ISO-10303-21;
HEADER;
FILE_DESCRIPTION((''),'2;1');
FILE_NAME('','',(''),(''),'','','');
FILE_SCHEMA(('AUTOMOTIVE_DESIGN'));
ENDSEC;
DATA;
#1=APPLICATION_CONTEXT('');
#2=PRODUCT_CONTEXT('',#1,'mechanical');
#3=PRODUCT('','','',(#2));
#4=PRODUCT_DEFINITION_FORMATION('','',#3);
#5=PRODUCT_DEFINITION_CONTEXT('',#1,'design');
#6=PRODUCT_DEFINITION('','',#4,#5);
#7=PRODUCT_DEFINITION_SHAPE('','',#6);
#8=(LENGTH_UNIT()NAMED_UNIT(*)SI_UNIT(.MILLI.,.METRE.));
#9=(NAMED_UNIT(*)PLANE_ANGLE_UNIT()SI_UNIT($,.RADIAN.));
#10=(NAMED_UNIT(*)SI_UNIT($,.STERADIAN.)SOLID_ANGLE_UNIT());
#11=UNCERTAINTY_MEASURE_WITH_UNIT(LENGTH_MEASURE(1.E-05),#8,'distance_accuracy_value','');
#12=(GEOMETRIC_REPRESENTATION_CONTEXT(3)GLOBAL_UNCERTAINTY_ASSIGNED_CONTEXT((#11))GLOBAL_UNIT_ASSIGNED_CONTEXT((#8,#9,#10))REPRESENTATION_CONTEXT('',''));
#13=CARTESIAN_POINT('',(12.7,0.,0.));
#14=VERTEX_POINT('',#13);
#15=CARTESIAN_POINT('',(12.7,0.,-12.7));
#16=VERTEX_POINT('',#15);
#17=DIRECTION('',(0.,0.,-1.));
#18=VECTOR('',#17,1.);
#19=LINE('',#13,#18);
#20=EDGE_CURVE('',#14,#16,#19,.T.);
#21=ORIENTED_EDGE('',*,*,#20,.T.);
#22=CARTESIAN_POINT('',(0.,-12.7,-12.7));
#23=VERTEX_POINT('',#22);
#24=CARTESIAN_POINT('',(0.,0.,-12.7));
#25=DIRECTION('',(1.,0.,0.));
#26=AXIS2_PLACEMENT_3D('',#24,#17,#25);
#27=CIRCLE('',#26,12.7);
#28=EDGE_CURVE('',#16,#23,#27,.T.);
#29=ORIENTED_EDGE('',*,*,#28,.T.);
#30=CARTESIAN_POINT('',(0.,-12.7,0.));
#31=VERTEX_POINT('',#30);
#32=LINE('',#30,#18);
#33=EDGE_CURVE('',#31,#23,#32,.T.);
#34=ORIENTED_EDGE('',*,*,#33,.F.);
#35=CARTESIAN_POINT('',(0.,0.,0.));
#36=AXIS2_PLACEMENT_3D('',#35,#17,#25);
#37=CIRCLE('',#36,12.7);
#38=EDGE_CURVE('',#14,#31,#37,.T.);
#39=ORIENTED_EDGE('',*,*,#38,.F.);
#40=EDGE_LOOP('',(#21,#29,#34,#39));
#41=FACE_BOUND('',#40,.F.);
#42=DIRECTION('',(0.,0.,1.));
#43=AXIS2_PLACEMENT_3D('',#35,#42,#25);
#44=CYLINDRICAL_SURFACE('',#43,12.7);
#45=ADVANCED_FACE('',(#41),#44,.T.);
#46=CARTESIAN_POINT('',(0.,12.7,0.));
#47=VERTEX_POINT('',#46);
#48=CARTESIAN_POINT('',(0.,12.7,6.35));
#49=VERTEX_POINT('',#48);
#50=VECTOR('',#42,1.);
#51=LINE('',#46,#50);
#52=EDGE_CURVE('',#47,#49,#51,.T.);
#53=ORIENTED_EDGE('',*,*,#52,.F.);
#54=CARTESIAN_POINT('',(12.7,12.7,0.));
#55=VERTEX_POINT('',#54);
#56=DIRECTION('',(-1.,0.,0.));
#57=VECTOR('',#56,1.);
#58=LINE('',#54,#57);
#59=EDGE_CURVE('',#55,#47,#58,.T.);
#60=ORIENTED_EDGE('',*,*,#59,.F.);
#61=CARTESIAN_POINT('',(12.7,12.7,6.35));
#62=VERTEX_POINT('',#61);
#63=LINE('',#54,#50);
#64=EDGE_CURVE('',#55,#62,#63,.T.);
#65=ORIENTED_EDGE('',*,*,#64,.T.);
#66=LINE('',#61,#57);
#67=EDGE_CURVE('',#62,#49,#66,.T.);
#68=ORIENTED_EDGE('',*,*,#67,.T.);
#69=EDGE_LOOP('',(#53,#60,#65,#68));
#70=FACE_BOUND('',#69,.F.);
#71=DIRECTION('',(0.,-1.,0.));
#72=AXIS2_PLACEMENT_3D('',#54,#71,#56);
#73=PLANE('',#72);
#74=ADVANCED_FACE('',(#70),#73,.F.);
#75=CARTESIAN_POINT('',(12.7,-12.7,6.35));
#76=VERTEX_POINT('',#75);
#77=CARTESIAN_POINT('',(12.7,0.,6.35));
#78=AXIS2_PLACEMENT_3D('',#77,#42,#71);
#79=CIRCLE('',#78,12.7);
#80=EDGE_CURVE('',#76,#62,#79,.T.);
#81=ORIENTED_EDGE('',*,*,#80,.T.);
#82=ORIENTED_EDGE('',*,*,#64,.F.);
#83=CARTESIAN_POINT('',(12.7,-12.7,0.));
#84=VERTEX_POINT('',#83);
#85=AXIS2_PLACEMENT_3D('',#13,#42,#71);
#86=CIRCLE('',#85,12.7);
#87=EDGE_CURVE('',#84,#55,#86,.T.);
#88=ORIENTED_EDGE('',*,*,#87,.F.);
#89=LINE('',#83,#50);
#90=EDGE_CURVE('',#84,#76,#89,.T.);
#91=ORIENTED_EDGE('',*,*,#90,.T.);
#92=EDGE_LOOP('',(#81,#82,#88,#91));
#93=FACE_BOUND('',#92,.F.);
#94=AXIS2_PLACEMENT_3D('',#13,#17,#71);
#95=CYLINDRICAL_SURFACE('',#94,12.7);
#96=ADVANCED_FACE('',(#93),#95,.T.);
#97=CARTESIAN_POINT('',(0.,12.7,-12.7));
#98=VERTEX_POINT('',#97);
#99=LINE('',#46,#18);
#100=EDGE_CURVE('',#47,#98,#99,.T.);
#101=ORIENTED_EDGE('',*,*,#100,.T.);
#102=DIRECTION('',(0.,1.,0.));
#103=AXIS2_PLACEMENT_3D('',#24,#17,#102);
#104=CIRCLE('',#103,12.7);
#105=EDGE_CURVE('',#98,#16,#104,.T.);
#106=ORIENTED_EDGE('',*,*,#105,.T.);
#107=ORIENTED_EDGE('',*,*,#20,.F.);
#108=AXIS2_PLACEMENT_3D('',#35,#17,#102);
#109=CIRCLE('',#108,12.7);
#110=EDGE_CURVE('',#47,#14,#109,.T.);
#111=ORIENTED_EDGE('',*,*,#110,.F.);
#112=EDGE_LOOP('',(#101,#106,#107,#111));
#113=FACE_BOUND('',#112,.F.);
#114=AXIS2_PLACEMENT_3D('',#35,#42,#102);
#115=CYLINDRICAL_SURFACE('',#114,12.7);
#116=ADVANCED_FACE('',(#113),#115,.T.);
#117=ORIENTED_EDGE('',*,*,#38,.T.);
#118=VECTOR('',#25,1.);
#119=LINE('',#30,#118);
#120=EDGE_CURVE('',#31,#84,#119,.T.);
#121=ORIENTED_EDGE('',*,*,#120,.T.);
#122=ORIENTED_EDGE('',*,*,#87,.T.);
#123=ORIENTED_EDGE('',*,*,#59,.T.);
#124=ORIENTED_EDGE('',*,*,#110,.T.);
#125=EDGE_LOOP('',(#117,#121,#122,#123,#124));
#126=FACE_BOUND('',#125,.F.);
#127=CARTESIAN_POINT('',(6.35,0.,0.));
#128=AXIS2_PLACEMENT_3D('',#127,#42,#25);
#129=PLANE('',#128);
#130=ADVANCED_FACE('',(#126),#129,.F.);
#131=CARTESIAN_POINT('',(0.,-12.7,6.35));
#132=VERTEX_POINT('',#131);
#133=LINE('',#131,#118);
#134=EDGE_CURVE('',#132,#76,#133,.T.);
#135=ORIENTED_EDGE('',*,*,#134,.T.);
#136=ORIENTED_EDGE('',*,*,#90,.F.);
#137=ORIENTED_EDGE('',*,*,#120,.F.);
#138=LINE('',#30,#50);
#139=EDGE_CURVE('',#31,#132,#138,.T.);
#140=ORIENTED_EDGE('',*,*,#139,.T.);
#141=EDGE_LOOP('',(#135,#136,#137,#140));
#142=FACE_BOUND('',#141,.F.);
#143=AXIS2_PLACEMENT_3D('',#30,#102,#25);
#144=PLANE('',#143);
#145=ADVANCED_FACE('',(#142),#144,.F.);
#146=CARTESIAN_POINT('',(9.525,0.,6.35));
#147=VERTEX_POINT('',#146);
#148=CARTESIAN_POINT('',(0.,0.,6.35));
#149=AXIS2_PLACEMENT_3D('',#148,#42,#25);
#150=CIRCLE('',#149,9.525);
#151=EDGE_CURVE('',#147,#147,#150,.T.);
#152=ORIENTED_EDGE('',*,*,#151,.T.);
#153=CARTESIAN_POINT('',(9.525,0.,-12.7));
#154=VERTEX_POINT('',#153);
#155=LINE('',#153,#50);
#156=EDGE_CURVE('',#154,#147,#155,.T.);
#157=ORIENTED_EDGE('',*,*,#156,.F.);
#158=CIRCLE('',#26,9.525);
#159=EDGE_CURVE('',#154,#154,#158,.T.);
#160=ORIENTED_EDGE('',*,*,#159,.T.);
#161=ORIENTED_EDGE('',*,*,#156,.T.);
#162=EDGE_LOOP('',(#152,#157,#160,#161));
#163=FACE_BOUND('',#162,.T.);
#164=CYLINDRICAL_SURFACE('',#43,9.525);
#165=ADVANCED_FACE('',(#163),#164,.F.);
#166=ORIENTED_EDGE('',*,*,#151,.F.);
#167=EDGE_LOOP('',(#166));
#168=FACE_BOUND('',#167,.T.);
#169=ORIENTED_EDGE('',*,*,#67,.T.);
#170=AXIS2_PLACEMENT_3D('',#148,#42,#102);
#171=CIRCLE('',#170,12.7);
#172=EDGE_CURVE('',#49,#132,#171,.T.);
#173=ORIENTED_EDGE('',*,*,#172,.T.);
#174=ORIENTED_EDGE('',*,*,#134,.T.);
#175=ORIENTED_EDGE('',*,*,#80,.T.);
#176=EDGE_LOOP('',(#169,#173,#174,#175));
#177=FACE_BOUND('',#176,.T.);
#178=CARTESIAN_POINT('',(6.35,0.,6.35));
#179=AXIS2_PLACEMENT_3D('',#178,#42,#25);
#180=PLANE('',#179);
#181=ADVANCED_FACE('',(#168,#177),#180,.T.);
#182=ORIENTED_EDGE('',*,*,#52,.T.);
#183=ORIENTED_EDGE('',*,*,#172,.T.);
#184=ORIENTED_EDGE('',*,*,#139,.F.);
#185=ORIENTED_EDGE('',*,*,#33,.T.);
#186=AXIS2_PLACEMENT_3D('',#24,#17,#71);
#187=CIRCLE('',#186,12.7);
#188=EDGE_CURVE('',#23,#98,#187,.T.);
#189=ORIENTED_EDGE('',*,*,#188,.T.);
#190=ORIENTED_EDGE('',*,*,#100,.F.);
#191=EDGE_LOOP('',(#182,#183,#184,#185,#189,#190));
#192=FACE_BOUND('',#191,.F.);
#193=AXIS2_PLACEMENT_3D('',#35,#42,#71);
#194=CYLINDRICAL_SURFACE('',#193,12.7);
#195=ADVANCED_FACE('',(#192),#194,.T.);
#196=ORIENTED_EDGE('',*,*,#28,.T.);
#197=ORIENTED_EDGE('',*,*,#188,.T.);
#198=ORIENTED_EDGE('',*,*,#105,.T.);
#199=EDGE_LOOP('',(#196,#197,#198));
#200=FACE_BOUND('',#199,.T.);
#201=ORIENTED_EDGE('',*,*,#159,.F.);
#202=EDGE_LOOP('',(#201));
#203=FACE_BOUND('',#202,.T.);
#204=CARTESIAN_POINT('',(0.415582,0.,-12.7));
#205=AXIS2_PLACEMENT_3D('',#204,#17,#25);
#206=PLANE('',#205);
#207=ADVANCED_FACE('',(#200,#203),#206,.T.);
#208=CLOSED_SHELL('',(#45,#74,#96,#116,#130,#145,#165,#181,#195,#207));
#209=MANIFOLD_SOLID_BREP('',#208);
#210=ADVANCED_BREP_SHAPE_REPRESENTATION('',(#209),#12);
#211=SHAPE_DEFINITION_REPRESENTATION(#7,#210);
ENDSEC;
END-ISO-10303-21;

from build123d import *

# Parameters (mm, degrees)
F0_R     = 9.525
F1_DEPTH = 6.35
F2_R     = 9.525
F3_DEPTH = 12.7


# Not quite as in the source:
# - a length typed as a fraction of an inch, garbled in the dataset ("3 / 203.2 mm" for 3/8 in), is restored


with BuildPart() as f1:
    # F0 (on Top) → F1 (new body)
    with BuildSketch(Plane.XY):
        with BuildLine():
            Line((12.7, 12.7), (0, 12.7))
            ThreePointArc((0, 12.7), (-12.7, 0), (0, -12.7))
            Line((0, -12.7), (12.7, -12.7))
            ThreePointArc((12.7, -12.7), (25.4, 0), (12.7, 12.7))
        make_face()
        Circle(F0_R, mode=Mode.SUBTRACT)
    extrude(amount=F1_DEPTH)

    # F2 (on face) → F3 (join)
    with BuildSketch(Plane(origin=(0, 0, 0), x_dir=(1, 0, 0), z_dir=(0, 0, -1))):
        with BuildLine():
            ThreePointArc((0, -12.7), (8.9802561211, -8.9802561211), (12.7, 0))
            ThreePointArc((12.7, 0), (8.9802561211, 8.9802561211), (0, 12.7))
            ThreePointArc((0, 12.7), (-12.7, 0), (0, -12.7))
        make_face()
        Circle(F2_R, mode=Mode.SUBTRACT)
    extrude(amount=F3_DEPTH)


solid = f1.part
